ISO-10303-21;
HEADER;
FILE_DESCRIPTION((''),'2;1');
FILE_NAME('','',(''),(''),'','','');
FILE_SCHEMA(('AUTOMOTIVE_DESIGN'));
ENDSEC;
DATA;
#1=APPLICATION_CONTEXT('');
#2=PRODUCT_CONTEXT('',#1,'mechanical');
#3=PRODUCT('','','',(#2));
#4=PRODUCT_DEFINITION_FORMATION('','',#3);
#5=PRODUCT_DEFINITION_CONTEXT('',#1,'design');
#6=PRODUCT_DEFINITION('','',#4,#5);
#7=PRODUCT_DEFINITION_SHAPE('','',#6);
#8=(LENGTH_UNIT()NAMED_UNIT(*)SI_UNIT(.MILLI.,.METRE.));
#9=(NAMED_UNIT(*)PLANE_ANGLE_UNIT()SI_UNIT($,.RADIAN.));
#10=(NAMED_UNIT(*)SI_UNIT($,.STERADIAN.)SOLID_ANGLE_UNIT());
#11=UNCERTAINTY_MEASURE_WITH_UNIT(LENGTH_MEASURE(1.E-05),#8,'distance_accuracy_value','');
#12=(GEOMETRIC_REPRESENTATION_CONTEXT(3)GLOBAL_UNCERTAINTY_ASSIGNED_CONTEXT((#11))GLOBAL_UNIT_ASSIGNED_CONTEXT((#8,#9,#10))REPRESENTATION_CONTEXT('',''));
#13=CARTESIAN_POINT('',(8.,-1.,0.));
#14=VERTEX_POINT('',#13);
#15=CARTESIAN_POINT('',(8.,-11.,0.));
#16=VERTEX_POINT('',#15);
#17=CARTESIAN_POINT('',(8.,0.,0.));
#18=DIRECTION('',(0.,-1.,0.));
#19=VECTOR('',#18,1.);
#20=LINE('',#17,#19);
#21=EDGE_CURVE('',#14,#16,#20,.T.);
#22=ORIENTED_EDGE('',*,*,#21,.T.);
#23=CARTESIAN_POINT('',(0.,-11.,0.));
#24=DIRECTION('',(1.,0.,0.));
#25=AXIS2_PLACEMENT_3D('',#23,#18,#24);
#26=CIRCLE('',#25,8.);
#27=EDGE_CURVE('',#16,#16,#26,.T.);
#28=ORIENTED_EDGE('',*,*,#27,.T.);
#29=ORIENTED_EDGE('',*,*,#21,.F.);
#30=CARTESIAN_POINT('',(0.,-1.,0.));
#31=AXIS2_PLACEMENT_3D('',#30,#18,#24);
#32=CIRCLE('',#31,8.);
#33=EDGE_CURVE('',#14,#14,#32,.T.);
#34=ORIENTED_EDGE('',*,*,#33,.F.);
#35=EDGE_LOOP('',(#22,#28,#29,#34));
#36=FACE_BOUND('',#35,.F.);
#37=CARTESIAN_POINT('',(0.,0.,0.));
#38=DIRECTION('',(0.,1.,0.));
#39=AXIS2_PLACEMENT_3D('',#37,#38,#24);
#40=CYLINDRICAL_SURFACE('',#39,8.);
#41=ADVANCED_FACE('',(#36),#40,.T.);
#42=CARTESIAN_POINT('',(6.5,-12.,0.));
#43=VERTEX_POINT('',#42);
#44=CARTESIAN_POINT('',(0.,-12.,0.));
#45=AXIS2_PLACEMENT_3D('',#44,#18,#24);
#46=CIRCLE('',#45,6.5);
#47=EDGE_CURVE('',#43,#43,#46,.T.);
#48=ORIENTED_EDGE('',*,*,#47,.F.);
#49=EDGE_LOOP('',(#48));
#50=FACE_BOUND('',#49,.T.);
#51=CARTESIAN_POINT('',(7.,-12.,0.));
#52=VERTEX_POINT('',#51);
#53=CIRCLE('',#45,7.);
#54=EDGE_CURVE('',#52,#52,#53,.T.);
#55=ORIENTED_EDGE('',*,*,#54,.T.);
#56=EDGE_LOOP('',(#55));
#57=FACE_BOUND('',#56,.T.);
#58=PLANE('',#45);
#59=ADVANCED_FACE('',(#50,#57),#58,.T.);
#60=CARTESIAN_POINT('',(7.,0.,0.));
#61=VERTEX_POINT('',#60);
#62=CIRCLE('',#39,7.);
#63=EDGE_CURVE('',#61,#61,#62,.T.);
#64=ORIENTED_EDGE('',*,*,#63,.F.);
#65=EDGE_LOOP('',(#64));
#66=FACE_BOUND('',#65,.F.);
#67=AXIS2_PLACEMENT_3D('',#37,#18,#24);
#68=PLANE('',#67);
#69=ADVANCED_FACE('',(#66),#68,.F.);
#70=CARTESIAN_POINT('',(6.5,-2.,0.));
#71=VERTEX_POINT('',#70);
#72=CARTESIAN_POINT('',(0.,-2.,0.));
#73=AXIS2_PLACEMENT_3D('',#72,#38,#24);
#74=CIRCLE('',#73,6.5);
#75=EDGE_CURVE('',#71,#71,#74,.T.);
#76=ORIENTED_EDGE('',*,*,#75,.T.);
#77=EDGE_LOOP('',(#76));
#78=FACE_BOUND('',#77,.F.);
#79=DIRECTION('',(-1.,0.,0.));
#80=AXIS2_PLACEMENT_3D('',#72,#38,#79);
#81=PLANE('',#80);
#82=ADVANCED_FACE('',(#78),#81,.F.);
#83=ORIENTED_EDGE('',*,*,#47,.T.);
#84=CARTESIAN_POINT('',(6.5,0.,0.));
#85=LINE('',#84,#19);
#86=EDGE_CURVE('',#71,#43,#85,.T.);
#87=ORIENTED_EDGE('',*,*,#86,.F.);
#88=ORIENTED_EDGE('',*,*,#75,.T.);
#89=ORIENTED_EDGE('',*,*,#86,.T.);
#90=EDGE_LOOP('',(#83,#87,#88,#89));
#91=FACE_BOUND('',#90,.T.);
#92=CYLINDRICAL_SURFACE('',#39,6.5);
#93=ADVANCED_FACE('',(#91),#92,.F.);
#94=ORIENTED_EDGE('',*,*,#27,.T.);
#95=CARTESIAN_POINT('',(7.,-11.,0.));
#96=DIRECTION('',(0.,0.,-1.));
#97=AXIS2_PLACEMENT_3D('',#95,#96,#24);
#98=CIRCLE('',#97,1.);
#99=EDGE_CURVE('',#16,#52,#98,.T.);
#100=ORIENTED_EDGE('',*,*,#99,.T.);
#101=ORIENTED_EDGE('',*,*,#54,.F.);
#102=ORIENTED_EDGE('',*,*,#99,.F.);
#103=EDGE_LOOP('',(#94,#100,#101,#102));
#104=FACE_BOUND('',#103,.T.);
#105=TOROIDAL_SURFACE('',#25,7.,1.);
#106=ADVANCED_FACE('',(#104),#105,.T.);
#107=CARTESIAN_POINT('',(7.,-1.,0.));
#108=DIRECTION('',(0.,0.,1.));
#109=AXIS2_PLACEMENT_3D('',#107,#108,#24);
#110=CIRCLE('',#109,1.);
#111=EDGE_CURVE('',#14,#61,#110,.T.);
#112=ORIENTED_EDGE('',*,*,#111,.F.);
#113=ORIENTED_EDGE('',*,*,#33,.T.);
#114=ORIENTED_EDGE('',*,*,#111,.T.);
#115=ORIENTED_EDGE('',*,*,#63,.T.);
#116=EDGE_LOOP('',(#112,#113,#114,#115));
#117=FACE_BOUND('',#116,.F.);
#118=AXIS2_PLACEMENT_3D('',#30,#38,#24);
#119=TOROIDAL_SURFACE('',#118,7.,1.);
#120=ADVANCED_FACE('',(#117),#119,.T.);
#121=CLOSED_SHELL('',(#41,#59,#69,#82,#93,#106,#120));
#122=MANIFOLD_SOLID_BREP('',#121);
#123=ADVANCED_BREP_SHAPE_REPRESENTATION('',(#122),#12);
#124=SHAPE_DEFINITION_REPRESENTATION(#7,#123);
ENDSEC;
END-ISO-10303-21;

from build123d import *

# Parameters (mm, degrees)
F0_R     = 8
F0_R_2   = 6.5
F1_DEPTH = 12
F2_R     = 1
F3_R     = 7
F3_R_2   = 6.5
F4_DEPTH = 2


with BuildPart() as f1:
    # F0 (on Front) → F1 (new body)
    with BuildSketch(Plane.XZ):
        Circle(F0_R)
        Circle(F0_R_2, mode=Mode.SUBTRACT)
    extrude(amount=F1_DEPTH)

    # F2
    f2_edges = [f1.edges().sort_by_distance(p)[0] for p in [
        (-8, -12, 0),
        (-8, 0, 0),
    ]]
    fillet(f2_edges, radius=F2_R)

    # F3 (on face) → F4 (join)
    with BuildSketch(Plane(origin=(0, 0, 0), x_dir=(-1, 0, 0), z_dir=(0, 1, 0))):
        Circle(F3_R)
        Circle(F3_R_2, mode=Mode.SUBTRACT)
        Circle(F3_R_2)
    extrude(amount=-F4_DEPTH)


solid = f1.part
